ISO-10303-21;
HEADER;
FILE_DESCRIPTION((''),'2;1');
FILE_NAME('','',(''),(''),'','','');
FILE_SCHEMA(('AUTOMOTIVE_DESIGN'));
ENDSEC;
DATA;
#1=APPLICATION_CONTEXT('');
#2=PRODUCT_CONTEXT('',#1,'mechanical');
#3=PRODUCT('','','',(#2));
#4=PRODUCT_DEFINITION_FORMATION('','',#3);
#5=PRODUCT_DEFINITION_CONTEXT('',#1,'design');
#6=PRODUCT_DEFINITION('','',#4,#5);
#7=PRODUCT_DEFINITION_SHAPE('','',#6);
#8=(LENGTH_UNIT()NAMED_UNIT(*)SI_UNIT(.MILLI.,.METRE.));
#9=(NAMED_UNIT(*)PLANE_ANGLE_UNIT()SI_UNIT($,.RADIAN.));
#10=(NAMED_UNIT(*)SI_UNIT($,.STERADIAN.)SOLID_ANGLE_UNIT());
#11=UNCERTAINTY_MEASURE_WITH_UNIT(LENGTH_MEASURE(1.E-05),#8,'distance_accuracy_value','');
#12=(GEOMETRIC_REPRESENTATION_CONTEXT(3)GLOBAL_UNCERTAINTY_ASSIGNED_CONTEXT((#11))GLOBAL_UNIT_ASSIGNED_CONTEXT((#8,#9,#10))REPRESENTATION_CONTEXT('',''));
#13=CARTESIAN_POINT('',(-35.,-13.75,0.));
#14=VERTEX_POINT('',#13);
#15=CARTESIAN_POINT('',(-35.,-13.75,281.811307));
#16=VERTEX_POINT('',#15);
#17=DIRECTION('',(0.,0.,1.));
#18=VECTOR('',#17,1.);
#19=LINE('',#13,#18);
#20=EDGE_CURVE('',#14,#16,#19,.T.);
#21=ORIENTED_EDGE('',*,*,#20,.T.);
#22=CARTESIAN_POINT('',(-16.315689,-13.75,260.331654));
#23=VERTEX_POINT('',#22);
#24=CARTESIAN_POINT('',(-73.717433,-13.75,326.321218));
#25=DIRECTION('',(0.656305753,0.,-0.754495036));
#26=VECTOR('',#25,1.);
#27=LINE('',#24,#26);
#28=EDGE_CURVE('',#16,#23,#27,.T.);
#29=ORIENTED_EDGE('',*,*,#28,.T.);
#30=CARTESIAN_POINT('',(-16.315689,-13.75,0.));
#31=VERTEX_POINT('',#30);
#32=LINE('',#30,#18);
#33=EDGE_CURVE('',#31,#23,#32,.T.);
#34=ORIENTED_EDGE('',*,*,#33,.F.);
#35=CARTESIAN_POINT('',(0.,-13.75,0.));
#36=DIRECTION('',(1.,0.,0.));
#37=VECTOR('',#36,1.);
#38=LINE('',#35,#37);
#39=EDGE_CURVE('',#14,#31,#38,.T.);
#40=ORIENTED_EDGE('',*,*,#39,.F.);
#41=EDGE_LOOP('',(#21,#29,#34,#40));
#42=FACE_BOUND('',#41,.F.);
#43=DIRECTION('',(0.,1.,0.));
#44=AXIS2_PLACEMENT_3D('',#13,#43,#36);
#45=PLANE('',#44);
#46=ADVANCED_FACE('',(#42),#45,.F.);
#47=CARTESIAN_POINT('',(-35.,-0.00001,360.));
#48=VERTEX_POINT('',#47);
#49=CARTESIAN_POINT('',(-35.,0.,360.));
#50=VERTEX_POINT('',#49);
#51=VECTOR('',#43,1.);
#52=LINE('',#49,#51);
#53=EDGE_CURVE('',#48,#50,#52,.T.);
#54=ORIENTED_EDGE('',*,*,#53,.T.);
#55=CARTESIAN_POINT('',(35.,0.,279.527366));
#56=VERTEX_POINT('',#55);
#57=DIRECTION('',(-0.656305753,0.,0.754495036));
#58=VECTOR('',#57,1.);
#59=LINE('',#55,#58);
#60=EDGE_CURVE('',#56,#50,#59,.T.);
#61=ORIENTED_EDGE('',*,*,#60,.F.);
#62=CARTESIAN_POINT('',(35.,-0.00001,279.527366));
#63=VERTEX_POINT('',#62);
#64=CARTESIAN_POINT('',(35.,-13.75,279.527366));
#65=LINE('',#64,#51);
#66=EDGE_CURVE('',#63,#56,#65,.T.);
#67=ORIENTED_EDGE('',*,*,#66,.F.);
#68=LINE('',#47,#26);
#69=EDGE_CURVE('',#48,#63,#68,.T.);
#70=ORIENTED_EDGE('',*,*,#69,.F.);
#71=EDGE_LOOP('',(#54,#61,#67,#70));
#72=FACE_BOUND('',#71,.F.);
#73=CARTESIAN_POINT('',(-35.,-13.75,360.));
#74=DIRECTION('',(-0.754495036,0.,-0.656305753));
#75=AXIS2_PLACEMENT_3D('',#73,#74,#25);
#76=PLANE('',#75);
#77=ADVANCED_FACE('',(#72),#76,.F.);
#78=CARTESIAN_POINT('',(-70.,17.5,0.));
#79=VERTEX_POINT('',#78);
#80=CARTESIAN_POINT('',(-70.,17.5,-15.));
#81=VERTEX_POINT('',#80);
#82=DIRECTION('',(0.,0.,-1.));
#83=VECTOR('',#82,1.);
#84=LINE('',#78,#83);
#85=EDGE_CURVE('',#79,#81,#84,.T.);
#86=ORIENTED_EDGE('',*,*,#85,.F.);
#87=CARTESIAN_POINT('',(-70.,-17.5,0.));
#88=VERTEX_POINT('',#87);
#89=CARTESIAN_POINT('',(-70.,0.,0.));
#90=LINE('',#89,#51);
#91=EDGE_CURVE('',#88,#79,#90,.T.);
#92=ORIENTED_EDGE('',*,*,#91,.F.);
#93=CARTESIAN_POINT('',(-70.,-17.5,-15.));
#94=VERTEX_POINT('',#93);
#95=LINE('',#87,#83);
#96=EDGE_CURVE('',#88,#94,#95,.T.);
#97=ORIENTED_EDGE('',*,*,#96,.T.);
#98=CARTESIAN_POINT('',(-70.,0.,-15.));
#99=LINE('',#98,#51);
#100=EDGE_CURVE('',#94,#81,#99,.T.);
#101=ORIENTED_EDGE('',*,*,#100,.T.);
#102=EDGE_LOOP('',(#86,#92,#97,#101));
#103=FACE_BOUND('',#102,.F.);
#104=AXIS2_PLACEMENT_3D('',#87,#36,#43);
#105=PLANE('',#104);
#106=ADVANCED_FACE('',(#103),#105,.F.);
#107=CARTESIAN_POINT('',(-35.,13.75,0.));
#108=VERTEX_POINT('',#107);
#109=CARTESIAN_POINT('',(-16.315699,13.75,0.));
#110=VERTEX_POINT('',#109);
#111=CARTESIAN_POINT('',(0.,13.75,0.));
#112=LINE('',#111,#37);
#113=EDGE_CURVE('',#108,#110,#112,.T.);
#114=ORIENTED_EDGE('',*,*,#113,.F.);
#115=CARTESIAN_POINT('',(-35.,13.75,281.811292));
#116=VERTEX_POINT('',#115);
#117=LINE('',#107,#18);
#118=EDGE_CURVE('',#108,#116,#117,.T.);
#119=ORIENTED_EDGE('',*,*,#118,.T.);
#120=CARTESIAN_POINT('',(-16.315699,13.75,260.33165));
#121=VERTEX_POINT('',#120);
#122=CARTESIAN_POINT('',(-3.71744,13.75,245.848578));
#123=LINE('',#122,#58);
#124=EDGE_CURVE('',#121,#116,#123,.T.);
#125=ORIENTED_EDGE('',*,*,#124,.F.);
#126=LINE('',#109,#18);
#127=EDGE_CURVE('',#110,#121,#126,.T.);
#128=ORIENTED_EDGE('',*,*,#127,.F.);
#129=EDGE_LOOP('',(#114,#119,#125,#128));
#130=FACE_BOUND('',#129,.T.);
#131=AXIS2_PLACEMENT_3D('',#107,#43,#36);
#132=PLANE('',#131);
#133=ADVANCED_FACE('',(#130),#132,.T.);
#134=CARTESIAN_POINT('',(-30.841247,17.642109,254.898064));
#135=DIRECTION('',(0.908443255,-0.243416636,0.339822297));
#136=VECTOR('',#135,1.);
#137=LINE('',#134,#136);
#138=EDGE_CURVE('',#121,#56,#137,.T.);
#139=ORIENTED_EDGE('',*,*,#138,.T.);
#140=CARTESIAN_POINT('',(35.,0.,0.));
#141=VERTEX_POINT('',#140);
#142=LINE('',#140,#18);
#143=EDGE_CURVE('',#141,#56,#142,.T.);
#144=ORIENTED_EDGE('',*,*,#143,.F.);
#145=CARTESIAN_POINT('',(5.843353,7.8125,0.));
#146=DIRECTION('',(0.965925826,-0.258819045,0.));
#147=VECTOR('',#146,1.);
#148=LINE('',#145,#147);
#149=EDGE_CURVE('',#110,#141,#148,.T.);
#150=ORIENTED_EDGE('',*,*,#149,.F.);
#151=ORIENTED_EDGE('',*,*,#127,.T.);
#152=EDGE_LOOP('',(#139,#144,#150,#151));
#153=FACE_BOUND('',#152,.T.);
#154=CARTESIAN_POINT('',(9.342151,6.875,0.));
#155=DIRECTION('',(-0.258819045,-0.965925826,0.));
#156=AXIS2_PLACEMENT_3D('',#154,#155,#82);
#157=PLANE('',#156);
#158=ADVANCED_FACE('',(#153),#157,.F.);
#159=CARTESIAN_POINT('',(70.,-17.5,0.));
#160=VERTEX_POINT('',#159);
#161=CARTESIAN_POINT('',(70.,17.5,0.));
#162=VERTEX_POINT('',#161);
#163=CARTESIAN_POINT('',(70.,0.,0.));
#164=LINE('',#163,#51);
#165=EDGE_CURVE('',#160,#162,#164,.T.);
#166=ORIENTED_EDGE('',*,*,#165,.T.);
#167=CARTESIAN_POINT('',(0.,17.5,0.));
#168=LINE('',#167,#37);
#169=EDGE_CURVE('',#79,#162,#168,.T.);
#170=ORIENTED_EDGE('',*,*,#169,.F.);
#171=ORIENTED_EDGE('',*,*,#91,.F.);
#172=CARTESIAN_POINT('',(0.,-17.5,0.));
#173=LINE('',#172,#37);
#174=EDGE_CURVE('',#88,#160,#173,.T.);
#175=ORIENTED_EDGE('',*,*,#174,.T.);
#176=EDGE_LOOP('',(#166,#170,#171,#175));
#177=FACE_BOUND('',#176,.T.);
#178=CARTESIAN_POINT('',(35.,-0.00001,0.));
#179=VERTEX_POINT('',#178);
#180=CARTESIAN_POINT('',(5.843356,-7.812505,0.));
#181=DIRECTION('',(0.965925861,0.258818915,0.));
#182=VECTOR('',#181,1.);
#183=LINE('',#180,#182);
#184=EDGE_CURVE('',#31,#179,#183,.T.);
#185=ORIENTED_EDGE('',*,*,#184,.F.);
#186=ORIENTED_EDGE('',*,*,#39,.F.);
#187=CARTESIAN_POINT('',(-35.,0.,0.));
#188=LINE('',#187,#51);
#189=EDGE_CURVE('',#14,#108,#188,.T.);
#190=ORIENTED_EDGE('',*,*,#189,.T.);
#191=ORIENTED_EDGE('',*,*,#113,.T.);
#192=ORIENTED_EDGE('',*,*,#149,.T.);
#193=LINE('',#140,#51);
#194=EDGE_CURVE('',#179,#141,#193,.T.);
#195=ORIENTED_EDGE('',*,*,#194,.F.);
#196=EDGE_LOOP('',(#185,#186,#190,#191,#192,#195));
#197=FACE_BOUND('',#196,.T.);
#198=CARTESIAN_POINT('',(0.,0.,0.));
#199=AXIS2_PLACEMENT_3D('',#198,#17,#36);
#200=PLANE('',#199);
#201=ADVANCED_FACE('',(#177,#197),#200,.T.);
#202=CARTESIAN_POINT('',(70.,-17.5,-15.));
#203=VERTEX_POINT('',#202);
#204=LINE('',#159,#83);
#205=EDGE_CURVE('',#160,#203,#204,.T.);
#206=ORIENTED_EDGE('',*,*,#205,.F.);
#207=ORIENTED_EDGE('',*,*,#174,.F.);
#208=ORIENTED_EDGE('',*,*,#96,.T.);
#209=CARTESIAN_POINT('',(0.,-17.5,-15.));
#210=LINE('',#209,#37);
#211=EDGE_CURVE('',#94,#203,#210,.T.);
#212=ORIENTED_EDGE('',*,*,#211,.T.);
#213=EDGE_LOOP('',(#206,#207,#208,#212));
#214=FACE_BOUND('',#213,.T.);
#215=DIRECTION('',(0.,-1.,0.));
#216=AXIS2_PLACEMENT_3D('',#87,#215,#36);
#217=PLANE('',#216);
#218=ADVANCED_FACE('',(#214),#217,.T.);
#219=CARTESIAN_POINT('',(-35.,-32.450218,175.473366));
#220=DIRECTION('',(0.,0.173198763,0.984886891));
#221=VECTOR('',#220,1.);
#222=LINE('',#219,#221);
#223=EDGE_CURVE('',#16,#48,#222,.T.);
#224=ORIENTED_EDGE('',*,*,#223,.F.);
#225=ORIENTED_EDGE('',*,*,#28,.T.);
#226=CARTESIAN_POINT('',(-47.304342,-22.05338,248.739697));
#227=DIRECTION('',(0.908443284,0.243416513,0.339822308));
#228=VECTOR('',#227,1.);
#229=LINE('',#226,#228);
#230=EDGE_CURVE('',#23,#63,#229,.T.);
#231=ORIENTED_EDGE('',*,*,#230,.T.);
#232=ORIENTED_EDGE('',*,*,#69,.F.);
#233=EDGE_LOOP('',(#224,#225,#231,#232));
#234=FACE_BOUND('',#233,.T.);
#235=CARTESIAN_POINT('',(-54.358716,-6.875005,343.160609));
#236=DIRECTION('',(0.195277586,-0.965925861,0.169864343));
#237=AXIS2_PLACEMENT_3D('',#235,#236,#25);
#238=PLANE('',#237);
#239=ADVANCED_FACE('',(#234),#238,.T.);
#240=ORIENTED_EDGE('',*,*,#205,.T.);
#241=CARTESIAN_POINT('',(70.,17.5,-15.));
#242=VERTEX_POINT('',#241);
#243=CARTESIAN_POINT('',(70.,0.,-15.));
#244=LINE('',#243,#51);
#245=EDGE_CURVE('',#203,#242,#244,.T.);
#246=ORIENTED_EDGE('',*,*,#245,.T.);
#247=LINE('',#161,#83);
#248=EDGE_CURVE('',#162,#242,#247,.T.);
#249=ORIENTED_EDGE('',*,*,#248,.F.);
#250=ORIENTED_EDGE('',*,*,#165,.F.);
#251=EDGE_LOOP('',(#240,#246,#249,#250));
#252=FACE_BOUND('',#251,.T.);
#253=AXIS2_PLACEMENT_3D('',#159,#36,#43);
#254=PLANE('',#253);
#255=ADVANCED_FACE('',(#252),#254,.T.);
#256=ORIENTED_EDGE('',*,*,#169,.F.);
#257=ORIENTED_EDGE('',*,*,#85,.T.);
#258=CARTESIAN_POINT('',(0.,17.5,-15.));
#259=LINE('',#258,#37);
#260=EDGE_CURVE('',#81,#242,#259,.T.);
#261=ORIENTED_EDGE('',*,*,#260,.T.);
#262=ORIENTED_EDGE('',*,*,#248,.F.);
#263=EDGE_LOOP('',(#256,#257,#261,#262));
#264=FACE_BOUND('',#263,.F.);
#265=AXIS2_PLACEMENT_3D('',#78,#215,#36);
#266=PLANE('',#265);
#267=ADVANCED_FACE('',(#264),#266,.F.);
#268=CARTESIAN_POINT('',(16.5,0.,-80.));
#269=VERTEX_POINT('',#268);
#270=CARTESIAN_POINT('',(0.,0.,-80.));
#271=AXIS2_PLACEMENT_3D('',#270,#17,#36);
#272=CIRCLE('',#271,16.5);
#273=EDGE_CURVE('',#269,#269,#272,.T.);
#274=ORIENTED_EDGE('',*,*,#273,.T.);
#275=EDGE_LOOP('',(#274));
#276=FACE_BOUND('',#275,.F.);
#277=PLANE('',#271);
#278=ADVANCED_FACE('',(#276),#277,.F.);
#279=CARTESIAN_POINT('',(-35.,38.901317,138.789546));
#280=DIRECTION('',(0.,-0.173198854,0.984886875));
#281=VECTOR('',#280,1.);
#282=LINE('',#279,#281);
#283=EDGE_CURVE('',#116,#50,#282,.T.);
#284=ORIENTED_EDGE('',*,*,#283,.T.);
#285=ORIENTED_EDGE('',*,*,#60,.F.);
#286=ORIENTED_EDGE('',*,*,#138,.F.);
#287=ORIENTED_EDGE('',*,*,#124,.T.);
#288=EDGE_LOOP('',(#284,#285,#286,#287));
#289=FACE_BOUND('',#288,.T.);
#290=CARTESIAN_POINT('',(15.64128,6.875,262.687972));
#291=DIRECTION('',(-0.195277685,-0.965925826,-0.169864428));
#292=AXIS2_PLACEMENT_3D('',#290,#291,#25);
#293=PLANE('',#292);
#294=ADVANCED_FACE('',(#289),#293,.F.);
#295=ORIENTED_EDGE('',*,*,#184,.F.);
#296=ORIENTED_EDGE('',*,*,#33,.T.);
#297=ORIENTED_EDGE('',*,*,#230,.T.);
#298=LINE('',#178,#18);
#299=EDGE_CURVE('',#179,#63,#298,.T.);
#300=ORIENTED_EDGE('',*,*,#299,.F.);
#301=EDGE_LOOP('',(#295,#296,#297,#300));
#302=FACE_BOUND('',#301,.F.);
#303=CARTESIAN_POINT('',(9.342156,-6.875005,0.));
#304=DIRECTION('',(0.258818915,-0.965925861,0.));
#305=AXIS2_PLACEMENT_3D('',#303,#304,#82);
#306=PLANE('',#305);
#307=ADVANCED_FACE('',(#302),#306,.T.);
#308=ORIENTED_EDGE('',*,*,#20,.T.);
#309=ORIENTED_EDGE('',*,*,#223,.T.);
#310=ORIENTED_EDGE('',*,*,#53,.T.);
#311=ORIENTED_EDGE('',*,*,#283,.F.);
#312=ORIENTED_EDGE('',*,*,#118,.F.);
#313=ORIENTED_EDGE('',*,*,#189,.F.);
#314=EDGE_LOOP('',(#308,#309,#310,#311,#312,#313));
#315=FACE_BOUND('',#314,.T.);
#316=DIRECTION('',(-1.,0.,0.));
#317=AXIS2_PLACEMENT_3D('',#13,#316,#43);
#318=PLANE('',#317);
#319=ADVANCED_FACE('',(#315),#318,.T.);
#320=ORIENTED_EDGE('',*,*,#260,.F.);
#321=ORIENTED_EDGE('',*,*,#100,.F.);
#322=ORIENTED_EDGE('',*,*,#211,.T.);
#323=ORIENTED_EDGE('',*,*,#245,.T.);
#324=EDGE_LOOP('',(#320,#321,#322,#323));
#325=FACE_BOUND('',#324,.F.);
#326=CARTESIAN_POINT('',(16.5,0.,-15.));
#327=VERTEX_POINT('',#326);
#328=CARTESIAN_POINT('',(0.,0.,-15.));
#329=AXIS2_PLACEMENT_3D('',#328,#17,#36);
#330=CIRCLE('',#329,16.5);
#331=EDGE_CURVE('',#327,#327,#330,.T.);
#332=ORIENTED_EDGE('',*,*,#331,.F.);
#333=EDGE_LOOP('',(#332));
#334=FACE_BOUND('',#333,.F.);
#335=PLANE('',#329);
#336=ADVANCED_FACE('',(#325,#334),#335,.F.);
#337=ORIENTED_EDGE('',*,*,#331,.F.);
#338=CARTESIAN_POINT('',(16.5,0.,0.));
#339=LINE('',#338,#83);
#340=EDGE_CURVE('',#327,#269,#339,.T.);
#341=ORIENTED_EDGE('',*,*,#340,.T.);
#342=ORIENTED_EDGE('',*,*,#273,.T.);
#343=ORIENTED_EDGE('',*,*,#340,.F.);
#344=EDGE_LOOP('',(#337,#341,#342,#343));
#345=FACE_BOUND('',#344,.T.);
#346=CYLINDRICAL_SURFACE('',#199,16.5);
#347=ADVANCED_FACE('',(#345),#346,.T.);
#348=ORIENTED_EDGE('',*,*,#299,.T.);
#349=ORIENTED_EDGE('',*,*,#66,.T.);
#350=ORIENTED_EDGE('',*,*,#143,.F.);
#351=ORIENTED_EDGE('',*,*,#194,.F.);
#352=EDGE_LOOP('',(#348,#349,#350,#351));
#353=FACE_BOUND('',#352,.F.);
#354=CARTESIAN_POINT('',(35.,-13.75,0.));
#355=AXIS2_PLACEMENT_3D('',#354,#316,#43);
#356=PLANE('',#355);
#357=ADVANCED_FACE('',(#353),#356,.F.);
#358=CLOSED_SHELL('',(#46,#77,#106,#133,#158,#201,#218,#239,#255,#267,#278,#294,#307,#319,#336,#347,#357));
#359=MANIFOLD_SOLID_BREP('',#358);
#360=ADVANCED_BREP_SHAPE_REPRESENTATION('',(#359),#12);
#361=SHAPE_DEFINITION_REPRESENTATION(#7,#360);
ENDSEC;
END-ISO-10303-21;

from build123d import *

# Parameters (mm, degrees)
F0_R       = 16.5
F1_DEPTH   = 80
F2_W       = 140
F2_H       = 35
F2_R       = 16.5
F3_DEPTH   = 15
F4_W       = 70
F4_H       = 27.5
F5_DEPTH   = 360
F7_DEPTH   = 50
F8_SIZE2   = 13.75
F8_SIZE    = 51.3156986041
F8_2_SIZE2 = 13.74999
F8_2_SIZE  = 51.315689


# Not quite as in the source:
# - a fillet or chamfer is up to 0.001 mm smaller than in the source, because OpenCascade refuses the exact size


with BuildPart() as f1:
    # F0 (on Top) → F1 (new body)
    with BuildSketch(Plane.XY):
        Circle(F0_R)
    extrude(amount=-F1_DEPTH)

    # F2 (on face) → F3 (join)
    with BuildSketch(Plane.XY):
        Rectangle(F2_W, F2_H)
        Circle(F2_R, mode=Mode.SUBTRACT)
    extrude(amount=-F3_DEPTH)

    # F4 (on face) → F5 (join)
    with BuildSketch(Plane.XY):
        Rectangle(F4_W, F4_H)
    extrude(amount=F5_DEPTH)

    # F6 (on face) → F7 (cut)
    with BuildSketch(Plane.XZ.offset(13.75)):
        Polygon((35, 360), (-35, 360), (35, 279.5273661613), align=None)
    extrude(amount=-F7_DEPTH, mode=Mode.SUBTRACT)

    # F8
    f8_edges = [f1.edges().sort_by_distance(p)[0] for p in [
        (35, 13.75, 139.763683),
        (0, 13.75, 319.763683),
    ]]
    f8_side = f1.faces().sort_by_distance((-1.468033, 13.75, 160.725674))[0]
    chamfer(f8_edges, length=F8_SIZE, length2=F8_SIZE2, reference=f8_side)

    # F8#2 (size 51.3156986041 and 13.75 in the source; OpenCascade refuses exactly that, so slightly less here)
    f8_2_edges = [f1.edges().sort_by_distance(p)[0] for p in [
        (35, -13.75, 139.763683),
        (0, -13.75, 319.763683),
    ]]
    f8_2_side = f1.faces().sort_by_distance((-1.468033, -13.75, 160.725674))[0]
    chamfer(f8_2_edges, length=F8_2_SIZE, length2=F8_2_SIZE2, reference=f8_2_side)


solid = f1.part
